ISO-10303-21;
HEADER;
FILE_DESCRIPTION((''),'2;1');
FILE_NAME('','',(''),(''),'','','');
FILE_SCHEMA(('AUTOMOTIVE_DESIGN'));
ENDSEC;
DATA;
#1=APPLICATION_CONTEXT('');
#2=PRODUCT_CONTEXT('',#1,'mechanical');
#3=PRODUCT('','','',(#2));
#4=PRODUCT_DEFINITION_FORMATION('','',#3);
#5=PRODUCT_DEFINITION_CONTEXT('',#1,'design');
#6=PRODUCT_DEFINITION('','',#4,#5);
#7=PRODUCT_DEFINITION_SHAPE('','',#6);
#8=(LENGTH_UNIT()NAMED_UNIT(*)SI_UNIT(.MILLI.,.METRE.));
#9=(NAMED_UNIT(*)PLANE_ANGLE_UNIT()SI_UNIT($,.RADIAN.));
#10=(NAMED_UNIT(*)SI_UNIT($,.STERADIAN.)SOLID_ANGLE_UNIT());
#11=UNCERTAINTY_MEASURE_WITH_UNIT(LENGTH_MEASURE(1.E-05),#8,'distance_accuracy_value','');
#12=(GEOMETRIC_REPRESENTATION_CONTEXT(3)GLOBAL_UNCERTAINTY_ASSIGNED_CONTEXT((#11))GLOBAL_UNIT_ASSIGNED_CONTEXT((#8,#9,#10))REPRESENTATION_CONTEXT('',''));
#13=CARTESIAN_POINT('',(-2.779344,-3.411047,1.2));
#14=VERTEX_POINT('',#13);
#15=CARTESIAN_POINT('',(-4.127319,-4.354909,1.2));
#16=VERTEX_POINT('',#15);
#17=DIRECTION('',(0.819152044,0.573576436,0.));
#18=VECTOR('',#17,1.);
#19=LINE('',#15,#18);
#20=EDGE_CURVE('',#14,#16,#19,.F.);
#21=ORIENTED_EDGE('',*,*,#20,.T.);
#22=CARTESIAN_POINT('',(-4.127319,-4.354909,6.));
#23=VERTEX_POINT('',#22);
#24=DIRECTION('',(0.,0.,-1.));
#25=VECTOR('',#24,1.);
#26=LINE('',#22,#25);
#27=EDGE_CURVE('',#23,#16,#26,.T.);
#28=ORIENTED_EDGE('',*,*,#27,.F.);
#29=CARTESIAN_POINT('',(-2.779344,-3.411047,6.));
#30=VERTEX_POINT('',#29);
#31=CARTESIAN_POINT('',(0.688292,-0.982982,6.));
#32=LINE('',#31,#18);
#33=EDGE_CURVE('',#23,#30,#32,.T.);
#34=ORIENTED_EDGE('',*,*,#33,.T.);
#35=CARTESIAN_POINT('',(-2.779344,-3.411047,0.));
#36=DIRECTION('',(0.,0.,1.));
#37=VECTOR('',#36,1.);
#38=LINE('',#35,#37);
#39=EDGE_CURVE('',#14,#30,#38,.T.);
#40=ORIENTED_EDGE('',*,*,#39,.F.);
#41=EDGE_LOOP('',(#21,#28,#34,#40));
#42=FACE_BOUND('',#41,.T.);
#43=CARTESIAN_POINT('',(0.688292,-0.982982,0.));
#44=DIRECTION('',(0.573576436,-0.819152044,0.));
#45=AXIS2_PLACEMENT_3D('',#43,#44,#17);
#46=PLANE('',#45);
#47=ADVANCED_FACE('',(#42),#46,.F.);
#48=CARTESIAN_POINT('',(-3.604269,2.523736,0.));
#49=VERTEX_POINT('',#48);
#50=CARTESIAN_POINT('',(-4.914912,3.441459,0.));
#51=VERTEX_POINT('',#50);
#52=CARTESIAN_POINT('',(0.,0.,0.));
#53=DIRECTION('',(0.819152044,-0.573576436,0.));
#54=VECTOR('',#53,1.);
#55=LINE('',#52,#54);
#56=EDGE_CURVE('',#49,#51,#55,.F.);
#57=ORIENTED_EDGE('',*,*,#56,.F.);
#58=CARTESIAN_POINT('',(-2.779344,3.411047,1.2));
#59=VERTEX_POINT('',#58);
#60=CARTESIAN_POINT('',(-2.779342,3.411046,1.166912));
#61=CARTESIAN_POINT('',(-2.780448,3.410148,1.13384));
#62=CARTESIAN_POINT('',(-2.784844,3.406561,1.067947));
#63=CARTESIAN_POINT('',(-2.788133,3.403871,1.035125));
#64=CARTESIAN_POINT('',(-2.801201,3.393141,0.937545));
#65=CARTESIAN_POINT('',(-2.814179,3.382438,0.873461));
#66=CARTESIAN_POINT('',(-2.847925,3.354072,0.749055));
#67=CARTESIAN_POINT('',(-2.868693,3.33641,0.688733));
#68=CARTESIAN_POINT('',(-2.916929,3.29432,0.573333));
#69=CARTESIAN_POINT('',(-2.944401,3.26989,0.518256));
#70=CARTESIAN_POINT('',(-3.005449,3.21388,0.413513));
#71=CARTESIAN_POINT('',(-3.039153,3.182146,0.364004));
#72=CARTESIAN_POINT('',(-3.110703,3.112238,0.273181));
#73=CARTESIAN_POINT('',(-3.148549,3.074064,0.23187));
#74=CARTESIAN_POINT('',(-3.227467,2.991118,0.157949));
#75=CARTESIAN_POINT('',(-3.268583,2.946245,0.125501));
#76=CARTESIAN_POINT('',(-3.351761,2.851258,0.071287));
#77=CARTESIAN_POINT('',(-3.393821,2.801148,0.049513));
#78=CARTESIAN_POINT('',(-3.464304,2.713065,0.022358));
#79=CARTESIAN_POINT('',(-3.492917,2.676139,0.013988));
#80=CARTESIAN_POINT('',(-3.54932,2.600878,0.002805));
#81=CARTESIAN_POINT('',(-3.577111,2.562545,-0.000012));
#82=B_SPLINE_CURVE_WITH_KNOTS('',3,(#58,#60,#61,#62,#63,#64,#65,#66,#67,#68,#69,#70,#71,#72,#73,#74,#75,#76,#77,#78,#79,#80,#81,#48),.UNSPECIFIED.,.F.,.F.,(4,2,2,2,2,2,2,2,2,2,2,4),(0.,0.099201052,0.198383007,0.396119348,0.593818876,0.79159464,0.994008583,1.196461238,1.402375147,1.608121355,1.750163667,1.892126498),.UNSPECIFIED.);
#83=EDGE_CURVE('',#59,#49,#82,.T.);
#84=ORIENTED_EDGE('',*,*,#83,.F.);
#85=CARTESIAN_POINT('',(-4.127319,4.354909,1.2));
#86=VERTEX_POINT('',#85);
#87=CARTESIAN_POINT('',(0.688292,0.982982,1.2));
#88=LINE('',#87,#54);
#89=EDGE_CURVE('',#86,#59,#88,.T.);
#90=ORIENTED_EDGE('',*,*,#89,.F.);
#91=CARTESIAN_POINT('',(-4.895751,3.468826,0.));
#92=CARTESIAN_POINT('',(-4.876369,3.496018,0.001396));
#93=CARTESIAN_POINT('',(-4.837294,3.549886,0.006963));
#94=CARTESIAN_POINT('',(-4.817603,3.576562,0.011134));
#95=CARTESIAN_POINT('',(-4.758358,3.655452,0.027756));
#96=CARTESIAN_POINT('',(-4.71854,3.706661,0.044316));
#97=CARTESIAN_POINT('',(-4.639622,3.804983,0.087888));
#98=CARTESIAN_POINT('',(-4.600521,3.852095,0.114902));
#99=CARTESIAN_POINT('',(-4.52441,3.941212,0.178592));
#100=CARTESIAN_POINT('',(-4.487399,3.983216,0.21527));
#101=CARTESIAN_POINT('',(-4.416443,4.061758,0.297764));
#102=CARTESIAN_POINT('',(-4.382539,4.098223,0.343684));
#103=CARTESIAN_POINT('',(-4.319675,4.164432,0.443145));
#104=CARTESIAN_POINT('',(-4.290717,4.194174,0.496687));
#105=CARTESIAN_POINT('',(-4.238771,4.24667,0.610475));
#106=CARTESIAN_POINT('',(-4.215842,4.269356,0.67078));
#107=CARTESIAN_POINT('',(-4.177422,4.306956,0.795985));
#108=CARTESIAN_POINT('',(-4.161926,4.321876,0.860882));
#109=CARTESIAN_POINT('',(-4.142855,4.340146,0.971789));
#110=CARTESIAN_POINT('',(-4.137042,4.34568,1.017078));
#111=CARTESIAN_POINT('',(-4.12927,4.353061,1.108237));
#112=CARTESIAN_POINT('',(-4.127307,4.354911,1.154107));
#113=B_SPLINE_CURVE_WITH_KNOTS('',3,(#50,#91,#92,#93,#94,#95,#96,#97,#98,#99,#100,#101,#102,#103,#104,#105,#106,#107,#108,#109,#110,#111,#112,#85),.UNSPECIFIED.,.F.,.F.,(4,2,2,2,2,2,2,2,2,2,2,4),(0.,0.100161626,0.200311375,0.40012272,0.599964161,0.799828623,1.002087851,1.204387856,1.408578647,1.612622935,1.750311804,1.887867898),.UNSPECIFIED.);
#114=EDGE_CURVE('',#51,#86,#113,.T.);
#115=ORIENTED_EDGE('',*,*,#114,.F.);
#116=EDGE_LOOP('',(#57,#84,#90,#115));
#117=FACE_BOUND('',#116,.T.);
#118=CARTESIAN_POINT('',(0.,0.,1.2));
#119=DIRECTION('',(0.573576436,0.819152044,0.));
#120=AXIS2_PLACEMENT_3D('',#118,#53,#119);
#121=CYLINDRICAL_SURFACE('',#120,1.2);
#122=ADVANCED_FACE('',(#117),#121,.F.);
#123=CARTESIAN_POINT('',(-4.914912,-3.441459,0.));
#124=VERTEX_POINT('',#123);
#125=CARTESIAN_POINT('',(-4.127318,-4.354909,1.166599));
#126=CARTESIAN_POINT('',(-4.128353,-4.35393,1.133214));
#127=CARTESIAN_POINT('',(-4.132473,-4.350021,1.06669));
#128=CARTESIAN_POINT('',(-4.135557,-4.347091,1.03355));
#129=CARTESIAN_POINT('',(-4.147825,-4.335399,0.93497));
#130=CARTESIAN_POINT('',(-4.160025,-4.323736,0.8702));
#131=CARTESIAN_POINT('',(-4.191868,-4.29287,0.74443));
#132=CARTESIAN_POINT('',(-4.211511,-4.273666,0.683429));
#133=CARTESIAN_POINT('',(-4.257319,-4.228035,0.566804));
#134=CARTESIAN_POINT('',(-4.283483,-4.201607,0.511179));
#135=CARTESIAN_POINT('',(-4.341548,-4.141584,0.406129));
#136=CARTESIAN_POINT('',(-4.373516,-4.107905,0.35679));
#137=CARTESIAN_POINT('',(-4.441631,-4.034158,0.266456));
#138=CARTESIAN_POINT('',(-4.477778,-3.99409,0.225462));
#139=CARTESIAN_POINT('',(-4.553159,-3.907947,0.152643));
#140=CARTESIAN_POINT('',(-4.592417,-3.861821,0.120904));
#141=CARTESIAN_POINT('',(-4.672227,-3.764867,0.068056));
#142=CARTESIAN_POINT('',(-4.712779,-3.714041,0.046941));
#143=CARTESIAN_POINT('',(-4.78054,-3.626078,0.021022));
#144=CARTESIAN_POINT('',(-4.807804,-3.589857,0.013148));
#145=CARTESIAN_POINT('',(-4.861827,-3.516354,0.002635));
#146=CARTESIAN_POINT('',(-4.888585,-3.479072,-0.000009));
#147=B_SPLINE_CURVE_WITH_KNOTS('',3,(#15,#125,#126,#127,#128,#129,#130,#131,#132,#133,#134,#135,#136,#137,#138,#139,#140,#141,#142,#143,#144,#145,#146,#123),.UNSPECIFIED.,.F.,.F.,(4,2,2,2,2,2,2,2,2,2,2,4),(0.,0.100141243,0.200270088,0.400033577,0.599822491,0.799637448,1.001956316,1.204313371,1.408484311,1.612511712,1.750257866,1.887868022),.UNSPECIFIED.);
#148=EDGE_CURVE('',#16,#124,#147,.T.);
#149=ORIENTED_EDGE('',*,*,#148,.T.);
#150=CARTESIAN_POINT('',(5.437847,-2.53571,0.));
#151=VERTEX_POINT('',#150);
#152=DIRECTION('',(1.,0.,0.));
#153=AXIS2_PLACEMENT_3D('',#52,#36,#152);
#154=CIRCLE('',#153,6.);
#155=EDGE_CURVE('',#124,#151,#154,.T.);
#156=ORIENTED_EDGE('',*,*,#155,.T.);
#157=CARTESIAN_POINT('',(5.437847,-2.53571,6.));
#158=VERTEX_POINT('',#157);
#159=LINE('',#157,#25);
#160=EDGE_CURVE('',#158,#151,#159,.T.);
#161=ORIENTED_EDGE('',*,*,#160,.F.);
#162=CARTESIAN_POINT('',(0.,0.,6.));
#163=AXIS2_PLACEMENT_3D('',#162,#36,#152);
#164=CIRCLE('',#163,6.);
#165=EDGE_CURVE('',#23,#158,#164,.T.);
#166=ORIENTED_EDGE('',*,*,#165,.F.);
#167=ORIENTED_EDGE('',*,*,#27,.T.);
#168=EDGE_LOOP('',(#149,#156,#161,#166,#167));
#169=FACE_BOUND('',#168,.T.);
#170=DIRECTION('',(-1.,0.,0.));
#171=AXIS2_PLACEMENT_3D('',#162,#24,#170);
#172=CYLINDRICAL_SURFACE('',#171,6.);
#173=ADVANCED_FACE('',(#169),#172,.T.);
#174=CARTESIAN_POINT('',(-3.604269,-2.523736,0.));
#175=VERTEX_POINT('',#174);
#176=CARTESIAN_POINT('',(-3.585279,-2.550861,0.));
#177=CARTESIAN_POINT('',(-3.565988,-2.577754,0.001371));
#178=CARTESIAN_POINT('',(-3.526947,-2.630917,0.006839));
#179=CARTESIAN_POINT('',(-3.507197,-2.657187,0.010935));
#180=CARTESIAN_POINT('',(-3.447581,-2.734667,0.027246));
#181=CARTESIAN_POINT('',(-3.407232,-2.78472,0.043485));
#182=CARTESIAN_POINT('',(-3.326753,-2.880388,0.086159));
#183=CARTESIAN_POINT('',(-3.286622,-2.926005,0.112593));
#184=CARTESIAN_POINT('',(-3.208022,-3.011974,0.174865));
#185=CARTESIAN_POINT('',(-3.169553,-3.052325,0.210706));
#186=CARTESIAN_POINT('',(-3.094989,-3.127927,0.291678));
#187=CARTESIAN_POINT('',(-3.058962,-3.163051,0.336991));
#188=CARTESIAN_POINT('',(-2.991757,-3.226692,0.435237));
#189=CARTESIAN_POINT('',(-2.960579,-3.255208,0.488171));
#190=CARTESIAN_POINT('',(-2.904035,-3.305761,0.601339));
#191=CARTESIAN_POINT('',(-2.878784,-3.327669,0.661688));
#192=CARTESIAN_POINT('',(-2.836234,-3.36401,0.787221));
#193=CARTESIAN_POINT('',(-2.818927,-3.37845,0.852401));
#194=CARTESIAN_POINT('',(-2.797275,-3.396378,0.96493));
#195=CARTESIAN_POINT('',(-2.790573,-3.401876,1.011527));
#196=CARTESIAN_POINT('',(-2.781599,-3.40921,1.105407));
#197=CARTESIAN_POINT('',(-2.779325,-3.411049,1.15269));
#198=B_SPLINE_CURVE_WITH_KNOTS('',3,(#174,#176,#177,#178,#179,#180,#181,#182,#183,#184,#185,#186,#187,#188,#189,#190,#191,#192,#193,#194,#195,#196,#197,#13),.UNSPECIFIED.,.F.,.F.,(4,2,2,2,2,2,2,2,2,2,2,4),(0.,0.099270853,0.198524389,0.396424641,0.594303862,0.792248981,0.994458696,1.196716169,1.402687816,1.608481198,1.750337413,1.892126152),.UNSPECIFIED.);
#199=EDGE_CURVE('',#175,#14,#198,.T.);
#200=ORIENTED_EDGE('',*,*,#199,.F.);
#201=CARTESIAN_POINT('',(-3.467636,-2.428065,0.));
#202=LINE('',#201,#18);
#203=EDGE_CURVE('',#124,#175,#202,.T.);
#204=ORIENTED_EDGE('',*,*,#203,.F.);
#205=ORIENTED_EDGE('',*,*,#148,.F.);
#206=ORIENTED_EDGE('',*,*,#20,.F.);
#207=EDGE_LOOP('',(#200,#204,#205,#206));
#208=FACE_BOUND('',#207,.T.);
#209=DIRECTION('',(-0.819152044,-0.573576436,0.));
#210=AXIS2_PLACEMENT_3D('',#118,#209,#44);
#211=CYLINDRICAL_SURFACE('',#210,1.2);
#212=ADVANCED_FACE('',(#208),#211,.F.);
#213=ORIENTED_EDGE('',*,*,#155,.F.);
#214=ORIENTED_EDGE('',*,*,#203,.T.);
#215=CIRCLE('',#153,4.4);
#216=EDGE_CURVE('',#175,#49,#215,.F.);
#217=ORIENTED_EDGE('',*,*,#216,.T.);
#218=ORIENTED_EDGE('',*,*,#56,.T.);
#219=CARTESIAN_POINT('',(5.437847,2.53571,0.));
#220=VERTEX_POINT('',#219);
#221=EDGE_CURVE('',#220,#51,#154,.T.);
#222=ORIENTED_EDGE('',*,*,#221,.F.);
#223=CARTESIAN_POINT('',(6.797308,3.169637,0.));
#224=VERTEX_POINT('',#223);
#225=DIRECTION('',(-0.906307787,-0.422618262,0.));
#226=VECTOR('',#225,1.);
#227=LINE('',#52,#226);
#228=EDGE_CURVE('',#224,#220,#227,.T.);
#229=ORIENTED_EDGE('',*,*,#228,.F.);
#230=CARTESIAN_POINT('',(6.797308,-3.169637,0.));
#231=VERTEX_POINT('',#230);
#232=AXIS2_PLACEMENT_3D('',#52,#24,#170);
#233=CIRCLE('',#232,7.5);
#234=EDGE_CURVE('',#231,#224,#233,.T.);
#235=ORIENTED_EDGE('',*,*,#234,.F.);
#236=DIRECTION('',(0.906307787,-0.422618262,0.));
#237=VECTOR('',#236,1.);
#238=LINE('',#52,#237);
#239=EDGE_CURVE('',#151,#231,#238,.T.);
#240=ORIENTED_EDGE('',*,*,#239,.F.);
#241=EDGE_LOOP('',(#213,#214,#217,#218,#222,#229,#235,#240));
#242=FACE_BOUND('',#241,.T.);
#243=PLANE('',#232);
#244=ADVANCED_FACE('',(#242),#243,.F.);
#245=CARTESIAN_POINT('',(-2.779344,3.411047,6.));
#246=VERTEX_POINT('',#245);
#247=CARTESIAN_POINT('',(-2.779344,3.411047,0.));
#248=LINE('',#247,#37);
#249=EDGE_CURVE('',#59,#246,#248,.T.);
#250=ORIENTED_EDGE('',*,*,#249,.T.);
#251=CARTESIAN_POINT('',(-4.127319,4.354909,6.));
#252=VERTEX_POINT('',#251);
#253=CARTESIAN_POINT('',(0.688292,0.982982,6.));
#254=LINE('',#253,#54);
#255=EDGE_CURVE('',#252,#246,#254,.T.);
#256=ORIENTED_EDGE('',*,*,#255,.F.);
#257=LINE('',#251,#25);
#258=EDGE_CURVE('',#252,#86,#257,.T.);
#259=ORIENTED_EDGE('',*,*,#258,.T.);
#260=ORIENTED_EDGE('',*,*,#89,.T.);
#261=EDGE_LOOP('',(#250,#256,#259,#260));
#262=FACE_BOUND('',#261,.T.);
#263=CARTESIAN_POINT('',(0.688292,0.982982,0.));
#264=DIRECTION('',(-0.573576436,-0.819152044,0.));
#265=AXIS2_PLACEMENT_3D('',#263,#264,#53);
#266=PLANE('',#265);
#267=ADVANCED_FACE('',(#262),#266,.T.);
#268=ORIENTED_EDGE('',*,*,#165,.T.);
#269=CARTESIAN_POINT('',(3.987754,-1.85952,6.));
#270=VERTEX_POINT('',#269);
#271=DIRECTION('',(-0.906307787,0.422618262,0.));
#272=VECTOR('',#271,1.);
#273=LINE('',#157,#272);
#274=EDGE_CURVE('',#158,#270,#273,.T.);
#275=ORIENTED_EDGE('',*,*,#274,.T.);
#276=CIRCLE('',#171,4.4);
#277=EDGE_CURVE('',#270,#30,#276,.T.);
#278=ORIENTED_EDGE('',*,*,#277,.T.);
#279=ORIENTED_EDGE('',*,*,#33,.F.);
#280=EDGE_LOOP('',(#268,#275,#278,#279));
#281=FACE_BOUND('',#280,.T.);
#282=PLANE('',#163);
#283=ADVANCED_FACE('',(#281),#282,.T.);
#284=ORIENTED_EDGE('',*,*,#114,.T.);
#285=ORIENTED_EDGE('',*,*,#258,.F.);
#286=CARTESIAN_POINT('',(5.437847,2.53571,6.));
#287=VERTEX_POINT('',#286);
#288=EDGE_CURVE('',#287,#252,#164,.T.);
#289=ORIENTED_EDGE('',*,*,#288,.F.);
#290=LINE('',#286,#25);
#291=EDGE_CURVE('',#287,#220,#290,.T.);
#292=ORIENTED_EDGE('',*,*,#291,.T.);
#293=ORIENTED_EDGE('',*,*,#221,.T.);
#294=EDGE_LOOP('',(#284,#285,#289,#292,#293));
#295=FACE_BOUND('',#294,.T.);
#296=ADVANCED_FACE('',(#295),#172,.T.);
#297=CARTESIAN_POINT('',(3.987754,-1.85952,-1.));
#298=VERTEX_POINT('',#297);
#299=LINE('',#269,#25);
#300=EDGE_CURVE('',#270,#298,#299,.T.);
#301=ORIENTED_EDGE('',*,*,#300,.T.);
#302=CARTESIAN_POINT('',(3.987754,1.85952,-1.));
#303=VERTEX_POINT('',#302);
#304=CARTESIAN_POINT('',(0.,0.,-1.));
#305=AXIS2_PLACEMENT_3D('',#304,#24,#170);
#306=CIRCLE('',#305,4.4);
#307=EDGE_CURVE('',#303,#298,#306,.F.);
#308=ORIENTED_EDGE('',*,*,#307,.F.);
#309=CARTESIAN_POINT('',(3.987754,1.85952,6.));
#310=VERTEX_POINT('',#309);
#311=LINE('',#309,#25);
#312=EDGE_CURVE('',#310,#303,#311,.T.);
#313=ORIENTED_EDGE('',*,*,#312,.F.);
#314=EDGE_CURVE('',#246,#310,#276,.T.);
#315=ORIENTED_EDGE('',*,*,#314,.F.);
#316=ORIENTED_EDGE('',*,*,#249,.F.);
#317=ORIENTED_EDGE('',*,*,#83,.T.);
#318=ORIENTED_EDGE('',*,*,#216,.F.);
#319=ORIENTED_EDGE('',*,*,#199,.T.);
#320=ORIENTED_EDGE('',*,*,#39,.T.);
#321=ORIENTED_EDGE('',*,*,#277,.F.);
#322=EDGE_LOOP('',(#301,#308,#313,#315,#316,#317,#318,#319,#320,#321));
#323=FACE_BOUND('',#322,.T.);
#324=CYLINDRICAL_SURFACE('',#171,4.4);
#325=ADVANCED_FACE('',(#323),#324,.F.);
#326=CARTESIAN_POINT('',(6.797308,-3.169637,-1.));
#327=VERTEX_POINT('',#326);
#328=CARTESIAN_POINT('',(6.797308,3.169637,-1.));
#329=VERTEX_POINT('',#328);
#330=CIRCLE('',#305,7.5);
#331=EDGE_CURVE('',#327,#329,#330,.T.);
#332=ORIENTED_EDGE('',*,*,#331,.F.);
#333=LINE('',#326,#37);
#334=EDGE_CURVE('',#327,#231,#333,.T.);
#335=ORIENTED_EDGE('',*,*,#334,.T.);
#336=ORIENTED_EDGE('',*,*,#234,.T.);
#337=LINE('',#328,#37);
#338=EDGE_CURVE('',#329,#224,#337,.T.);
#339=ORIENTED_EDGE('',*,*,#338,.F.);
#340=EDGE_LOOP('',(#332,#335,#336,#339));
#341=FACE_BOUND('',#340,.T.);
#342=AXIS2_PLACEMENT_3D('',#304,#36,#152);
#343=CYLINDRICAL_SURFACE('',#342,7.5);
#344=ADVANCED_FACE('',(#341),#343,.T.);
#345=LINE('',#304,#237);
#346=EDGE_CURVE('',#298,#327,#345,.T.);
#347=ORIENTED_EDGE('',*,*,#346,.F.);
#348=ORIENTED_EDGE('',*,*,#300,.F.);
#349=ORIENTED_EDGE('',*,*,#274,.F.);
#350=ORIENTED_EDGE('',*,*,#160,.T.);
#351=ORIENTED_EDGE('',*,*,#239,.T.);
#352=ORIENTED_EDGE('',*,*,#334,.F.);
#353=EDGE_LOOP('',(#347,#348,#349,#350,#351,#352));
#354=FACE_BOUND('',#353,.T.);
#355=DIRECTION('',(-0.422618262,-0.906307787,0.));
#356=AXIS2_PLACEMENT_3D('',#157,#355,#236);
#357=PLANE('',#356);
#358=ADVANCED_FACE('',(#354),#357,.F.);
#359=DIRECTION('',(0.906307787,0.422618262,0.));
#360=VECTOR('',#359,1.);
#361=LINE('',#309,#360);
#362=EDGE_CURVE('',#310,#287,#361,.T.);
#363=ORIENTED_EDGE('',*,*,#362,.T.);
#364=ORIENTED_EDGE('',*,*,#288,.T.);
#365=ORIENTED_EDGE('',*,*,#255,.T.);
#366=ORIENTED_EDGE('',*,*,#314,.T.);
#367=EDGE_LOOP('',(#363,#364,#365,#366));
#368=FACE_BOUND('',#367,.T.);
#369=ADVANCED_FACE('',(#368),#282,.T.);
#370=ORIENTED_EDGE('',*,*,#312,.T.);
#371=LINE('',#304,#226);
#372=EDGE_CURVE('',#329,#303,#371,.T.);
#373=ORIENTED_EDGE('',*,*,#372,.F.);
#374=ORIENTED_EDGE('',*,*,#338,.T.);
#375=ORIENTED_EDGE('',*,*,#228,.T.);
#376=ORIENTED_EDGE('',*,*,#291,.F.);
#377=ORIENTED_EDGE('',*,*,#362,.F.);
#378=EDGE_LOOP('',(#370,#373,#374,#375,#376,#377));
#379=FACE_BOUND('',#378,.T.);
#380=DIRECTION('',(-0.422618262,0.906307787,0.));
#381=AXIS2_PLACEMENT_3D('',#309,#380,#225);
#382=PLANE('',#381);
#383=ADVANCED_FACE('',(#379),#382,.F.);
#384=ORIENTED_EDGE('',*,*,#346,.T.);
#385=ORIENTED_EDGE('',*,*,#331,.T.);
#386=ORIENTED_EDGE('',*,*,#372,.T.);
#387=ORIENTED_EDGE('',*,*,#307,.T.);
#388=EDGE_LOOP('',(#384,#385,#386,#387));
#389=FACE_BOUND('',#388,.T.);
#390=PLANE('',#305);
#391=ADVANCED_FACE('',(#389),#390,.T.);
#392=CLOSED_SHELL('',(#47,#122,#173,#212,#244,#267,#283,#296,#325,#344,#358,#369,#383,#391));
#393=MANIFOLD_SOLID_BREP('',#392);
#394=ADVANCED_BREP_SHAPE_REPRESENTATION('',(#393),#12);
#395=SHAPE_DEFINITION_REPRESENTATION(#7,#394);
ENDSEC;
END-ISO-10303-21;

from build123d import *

# Parameters (mm, degrees)
BOSS_EXTRUDE1_DEPTH = 6
BOSS_EXTRUDE2_START = 1
BOSS_EXTRUDE2_DEPTH = 1
CUT_EXTRUDE1_START  = -6
CUT_EXTRUDE1_DEPTH  = 6
CUT_EXTRUDE2_START  = -6
CUT_EXTRUDE2_DEPTH  = 6
FILLET1_R           = 1.2


with BuildPart() as part:
    # Sketch1 → Boss-Extrude1 (new body)
    with BuildSketch(Plane.XY):
        with BuildLine():
            Line((3.987754263, 1.859520352), (5.437846722, 2.53570957))
            ThreePointArc((5.437846722, 2.53570957), (-6, 0), (5.437846722, -2.53570957))
            Line((5.437846722, -2.53570957), (3.987754263, -1.859520352))
            ThreePointArc((3.987754263, -1.859520352), (-4.4, 0), (3.987754263, 1.859520352))
        make_face()
    extrude(amount=BOSS_EXTRUDE1_DEPTH)

    # Sketch2 → Boss-Extrude2 (add)
    with BuildSketch(Plane(origin=(0, 0, 0), x_dir=(-1, 0, 0), z_dir=(0, 0, -1)).offset(BOSS_EXTRUDE2_START)):
        with BuildLine():
            Line((-3.987754263, -1.859520352), (-5.437846722, -2.53570957))
            ThreePointArc((-5.437846722, -2.53570957), (6, 0), (-5.437846722, 2.53570957))
            Line((-5.437846722, 2.53570957), (-3.987754263, 1.859520352))
            ThreePointArc((-3.987754263, 1.859520352), (4.4, 0), (-3.987754263, -1.859520352))
        make_face()
        with BuildLine():
            Line((-6.797308403, 3.169636963), (-5.437846722, 2.53570957))
            ThreePointArc((-5.437846722, 2.53570957), (6, 0), (-5.437846722, -2.53570957))
            Line((-5.437846722, -2.53570957), (-6.797308403, -3.169636963))
            ThreePointArc((-6.797308403, -3.169636963), (1.623297105, -7.322220053), (7.5, 0))
            ThreePointArc((7.5, 0), (1.623297105, 7.322220053), (-6.797308403, 3.169636963))
        make_face()
    extrude(amount=-BOSS_EXTRUDE2_DEPTH)

    # Sketch3 → Cut-Extrude1 (cut)
    with BuildSketch(Plane.XY.offset(6).offset(CUT_EXTRUDE1_START)):
        with BuildLine():
            ThreePointArc((-5.503902596, -2.388944581), (-4.914912266, -3.441458618), (-4.127319149, -4.354909487))
            Line((-4.127319149, -4.354909487), (-2.779344429, -3.411047427))
            ThreePointArc((-2.779344429, -3.411047427), (-3.604268995, -2.52373632), (-4.155927876, -1.44508252))
            Line((-4.155927876, -1.44508252), (-5.503902596, -2.388944581))
        make_face()
        with BuildLine():
            ThreePointArc((-5.376200178, 5.229385398), (-6.143640332, 4.301823273), (-6.752783625, 3.263420492))
            Line((-6.752783625, 3.263420492), (-5.503902596, 2.388944581))
            ThreePointArc((-5.503902596, 2.388944581), (-4.914912266, 3.441458618), (-4.127319149, 4.354909487))
            Line((-4.127319149, 4.354909487), (-5.376200178, 5.229385398))
        make_face()
        with BuildLine():
            ThreePointArc((-4.127319149, 4.354909487), (-4.914912266, 3.441458618), (-5.503902596, 2.388944581))
            Line((-5.503902596, 2.388944581), (-4.155927876, 1.44508252))
            ThreePointArc((-4.155927876, 1.44508252), (-3.604268995, 2.52373632), (-2.779344429, 3.411047427))
            Line((-2.779344429, 3.411047427), (-4.127319149, 4.354909487))
        make_face()
        with BuildLine():
            ThreePointArc((-6.752783625, -3.263420492), (-6.143640332, -4.301823273), (-5.376200178, -5.229385398))
            Line((-5.376200178, -5.229385398), (-4.127319149, -4.354909487))
            ThreePointArc((-4.127319149, -4.354909487), (-4.914912266, -3.441458618), (-5.503902596, -2.388944581))
            Line((-5.503902596, -2.388944581), (-6.752783625, -3.263420492))
        make_face()
    extrude(amount=CUT_EXTRUDE1_DEPTH, mode=Mode.SUBTRACT)

    # Sketch4 → Cut-Extrude2 (cut)
    with BuildSketch(Plane.XY.offset(6).offset(CUT_EXTRUDE2_START)):
        with BuildLine():
            Line((-4.155927876, 1.44508252), (-5.503902596, 2.388944581))
            ThreePointArc((-5.503902596, 2.388944581), (-6, 0), (-5.503902596, -2.388944581))
            Line((-5.503902596, -2.388944581), (-4.155927876, -1.44508252))
            ThreePointArc((-4.155927876, -1.44508252), (-4.4, 0), (-4.155927876, 1.44508252))
        make_face()
    extrude(amount=CUT_EXTRUDE2_DEPTH, mode=Mode.SUBTRACT)

    # Fillet1
    # the kernel refuses this fillet: 1.2 mm, written as the material it adds along each edge
    with BuildSketch(Plane(origin=(-0.321888296, 1.690318118, 0), x_dir=(0, 0, 1), z_dir=(-0.8191520442889906, 0.5735764363510478, 0))) as fillet1_piece_1_section:
        with BuildLine():
            CenterArc((FILLET1_R, -FILLET1_R), FILLET1_R, 90, 90)
            Line((0, -FILLET1_R), (0, 0))
            Line((0, 0), (FILLET1_R, 0))
        make_face()
    fillet1_piece_1 = extrude(amount=7.645573285, mode=Mode.PRIVATE)
    fillet1_piece_1 = fillet1_piece_1 - Plane(origin=(0, 0, 0.272987798), x_dir=(0.9063077870366507, -0.4226182617406978, 0), z_dir=(0, 0, -1)) * Cylinder(4.4, 21, mode=Mode.PRIVATE)
    fillet1_piece_1 = fillet1_piece_1 & Plane(origin=(0, 0, 0.272987798), x_dir=(0.9063077870366507, 0.4226182617406977, 0), z_dir=(0, 0, -1)) * Cylinder(6, 21, mode=Mode.PRIVATE)
    with BuildSketch(Plane(origin=(-6.584775282, -6.075638796, 0), x_dir=(-0.5735764363510464, 0.8191520442889915, 0), z_dir=(0.8191520442889916, 0.5735764363510465, 0))) as fillet1_piece_2_section:
        with BuildLine():
            CenterArc((FILLET1_R, FILLET1_R), FILLET1_R, 180, 90)
            Line((0, FILLET1_R), (0, 0))
            Line((0, 0), (FILLET1_R, 0))
        make_face()
    fillet1_piece_2 = extrude(amount=7.645573285, mode=Mode.PRIVATE)
    fillet1_piece_2 = fillet1_piece_2 - Plane(origin=(0, 0, 0.272987172), x_dir=(0.9063077870366507, 0.4226182617406977, 0), z_dir=(0, 0, -1)) * Cylinder(4.4, 21, mode=Mode.PRIVATE)
    fillet1_piece_2 = fillet1_piece_2 & Plane(origin=(0, 0, 0.272987172), x_dir=(0.9063077870366507, 0.4226182617406977, 0), z_dir=(0, 0, -1)) * Cylinder(6, 21, mode=Mode.PRIVATE)
    add([fillet1_piece_1, fillet1_piece_2])


solid = part.part
